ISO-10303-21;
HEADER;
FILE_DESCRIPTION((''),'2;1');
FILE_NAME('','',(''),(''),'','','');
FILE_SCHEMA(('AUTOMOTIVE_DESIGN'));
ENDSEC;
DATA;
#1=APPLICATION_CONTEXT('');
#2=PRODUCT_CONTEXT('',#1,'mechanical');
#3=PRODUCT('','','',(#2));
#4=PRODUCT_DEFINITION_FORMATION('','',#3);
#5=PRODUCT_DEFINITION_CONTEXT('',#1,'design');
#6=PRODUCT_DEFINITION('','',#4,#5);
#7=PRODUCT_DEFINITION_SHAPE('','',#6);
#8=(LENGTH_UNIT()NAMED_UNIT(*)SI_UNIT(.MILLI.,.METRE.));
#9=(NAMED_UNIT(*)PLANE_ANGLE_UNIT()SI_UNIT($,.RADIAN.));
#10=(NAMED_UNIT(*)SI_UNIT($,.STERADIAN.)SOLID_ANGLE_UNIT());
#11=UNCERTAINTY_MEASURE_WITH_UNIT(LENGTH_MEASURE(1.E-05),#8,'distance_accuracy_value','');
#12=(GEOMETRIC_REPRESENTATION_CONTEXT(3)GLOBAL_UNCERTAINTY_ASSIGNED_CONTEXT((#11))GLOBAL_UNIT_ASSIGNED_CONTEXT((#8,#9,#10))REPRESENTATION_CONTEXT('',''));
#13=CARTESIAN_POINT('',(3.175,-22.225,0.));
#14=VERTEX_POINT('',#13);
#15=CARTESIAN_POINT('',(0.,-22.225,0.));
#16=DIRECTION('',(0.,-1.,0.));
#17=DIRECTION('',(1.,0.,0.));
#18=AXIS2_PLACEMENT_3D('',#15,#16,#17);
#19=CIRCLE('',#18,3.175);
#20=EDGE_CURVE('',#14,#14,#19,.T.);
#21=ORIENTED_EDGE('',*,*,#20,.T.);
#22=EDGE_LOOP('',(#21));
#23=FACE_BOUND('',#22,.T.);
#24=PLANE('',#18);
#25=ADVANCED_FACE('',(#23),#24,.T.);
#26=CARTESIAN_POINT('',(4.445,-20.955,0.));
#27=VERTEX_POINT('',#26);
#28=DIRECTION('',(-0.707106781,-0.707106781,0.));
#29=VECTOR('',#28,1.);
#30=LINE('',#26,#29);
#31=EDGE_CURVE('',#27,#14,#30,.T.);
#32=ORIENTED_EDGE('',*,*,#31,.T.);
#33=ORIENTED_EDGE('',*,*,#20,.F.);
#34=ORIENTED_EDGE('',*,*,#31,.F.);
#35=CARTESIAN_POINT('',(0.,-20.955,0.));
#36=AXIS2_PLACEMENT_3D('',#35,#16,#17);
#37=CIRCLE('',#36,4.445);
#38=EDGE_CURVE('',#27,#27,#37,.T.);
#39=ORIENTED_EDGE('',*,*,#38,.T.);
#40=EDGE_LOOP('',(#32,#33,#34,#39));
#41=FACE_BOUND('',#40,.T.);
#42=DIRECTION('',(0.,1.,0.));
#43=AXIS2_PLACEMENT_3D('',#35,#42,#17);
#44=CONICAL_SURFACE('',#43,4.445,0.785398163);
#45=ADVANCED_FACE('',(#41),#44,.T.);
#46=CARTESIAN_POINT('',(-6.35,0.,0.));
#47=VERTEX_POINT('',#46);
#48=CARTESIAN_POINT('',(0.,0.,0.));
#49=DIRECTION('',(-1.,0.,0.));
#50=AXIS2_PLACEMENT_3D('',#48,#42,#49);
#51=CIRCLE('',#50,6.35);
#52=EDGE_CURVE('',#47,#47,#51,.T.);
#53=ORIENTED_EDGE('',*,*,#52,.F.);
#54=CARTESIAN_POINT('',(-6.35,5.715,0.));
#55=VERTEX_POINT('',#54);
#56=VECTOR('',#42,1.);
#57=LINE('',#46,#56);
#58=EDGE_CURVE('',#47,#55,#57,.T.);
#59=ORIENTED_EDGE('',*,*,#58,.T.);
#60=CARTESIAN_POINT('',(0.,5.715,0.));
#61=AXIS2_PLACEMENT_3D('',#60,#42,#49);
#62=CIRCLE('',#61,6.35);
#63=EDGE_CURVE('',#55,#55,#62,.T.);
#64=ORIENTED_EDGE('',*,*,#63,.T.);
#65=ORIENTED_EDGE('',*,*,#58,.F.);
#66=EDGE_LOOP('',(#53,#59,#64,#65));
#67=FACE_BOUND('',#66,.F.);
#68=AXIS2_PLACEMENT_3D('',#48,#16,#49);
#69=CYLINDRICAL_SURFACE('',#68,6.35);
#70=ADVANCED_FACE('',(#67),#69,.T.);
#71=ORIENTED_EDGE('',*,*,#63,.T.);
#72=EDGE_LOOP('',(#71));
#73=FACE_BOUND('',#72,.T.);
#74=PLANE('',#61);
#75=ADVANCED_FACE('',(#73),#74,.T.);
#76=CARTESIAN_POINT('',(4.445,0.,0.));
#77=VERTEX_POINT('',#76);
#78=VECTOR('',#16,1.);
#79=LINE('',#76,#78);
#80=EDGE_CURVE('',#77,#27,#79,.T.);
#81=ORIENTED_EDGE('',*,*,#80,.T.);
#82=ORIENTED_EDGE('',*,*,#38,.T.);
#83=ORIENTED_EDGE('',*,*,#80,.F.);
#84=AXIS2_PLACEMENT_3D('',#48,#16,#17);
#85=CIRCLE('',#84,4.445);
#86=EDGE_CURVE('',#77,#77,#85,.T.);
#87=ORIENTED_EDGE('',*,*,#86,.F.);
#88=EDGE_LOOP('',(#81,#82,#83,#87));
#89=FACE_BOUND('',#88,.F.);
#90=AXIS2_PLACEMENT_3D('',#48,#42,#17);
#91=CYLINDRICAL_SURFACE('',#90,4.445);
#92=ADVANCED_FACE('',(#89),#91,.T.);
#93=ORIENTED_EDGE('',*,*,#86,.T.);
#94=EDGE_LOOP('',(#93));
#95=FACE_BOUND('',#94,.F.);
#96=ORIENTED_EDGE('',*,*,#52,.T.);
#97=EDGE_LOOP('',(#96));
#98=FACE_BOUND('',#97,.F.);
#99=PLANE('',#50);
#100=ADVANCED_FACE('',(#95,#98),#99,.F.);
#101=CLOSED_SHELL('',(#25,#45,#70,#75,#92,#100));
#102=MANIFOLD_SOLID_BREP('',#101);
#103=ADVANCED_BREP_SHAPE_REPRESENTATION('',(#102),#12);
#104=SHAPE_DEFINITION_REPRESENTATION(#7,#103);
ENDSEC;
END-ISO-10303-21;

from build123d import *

# Parameters (mm, degrees)
F0_R     = 4.445
F1_DEPTH = 22.225
F2_R     = 6.35
F2_R_2   = 4.445
F3_DEPTH = 5.715
F4_SIZE  = 1.27


with BuildPart() as f1:
    # F0 (on Front) → F1 (new body)
    with BuildSketch(Plane.XZ):
        Circle(F0_R)
    extrude(amount=F1_DEPTH)

    # F2 (on face) → F3 (join)
    with BuildSketch(Plane(origin=(0, 0, 0), x_dir=(-1, 0, 0), z_dir=(0, 1, 0))):
        Circle(F2_R)
        Circle(F2_R_2, mode=Mode.SUBTRACT)
        Circle(F2_R_2)
    extrude(amount=F3_DEPTH)

    # F4
    f4_edges = [f1.edges().sort_by_distance(p)[0] for p in [
        (-4.445, -22.225, 0),
    ]]
    chamfer(f4_edges, length=F4_SIZE)


solid = f1.part
